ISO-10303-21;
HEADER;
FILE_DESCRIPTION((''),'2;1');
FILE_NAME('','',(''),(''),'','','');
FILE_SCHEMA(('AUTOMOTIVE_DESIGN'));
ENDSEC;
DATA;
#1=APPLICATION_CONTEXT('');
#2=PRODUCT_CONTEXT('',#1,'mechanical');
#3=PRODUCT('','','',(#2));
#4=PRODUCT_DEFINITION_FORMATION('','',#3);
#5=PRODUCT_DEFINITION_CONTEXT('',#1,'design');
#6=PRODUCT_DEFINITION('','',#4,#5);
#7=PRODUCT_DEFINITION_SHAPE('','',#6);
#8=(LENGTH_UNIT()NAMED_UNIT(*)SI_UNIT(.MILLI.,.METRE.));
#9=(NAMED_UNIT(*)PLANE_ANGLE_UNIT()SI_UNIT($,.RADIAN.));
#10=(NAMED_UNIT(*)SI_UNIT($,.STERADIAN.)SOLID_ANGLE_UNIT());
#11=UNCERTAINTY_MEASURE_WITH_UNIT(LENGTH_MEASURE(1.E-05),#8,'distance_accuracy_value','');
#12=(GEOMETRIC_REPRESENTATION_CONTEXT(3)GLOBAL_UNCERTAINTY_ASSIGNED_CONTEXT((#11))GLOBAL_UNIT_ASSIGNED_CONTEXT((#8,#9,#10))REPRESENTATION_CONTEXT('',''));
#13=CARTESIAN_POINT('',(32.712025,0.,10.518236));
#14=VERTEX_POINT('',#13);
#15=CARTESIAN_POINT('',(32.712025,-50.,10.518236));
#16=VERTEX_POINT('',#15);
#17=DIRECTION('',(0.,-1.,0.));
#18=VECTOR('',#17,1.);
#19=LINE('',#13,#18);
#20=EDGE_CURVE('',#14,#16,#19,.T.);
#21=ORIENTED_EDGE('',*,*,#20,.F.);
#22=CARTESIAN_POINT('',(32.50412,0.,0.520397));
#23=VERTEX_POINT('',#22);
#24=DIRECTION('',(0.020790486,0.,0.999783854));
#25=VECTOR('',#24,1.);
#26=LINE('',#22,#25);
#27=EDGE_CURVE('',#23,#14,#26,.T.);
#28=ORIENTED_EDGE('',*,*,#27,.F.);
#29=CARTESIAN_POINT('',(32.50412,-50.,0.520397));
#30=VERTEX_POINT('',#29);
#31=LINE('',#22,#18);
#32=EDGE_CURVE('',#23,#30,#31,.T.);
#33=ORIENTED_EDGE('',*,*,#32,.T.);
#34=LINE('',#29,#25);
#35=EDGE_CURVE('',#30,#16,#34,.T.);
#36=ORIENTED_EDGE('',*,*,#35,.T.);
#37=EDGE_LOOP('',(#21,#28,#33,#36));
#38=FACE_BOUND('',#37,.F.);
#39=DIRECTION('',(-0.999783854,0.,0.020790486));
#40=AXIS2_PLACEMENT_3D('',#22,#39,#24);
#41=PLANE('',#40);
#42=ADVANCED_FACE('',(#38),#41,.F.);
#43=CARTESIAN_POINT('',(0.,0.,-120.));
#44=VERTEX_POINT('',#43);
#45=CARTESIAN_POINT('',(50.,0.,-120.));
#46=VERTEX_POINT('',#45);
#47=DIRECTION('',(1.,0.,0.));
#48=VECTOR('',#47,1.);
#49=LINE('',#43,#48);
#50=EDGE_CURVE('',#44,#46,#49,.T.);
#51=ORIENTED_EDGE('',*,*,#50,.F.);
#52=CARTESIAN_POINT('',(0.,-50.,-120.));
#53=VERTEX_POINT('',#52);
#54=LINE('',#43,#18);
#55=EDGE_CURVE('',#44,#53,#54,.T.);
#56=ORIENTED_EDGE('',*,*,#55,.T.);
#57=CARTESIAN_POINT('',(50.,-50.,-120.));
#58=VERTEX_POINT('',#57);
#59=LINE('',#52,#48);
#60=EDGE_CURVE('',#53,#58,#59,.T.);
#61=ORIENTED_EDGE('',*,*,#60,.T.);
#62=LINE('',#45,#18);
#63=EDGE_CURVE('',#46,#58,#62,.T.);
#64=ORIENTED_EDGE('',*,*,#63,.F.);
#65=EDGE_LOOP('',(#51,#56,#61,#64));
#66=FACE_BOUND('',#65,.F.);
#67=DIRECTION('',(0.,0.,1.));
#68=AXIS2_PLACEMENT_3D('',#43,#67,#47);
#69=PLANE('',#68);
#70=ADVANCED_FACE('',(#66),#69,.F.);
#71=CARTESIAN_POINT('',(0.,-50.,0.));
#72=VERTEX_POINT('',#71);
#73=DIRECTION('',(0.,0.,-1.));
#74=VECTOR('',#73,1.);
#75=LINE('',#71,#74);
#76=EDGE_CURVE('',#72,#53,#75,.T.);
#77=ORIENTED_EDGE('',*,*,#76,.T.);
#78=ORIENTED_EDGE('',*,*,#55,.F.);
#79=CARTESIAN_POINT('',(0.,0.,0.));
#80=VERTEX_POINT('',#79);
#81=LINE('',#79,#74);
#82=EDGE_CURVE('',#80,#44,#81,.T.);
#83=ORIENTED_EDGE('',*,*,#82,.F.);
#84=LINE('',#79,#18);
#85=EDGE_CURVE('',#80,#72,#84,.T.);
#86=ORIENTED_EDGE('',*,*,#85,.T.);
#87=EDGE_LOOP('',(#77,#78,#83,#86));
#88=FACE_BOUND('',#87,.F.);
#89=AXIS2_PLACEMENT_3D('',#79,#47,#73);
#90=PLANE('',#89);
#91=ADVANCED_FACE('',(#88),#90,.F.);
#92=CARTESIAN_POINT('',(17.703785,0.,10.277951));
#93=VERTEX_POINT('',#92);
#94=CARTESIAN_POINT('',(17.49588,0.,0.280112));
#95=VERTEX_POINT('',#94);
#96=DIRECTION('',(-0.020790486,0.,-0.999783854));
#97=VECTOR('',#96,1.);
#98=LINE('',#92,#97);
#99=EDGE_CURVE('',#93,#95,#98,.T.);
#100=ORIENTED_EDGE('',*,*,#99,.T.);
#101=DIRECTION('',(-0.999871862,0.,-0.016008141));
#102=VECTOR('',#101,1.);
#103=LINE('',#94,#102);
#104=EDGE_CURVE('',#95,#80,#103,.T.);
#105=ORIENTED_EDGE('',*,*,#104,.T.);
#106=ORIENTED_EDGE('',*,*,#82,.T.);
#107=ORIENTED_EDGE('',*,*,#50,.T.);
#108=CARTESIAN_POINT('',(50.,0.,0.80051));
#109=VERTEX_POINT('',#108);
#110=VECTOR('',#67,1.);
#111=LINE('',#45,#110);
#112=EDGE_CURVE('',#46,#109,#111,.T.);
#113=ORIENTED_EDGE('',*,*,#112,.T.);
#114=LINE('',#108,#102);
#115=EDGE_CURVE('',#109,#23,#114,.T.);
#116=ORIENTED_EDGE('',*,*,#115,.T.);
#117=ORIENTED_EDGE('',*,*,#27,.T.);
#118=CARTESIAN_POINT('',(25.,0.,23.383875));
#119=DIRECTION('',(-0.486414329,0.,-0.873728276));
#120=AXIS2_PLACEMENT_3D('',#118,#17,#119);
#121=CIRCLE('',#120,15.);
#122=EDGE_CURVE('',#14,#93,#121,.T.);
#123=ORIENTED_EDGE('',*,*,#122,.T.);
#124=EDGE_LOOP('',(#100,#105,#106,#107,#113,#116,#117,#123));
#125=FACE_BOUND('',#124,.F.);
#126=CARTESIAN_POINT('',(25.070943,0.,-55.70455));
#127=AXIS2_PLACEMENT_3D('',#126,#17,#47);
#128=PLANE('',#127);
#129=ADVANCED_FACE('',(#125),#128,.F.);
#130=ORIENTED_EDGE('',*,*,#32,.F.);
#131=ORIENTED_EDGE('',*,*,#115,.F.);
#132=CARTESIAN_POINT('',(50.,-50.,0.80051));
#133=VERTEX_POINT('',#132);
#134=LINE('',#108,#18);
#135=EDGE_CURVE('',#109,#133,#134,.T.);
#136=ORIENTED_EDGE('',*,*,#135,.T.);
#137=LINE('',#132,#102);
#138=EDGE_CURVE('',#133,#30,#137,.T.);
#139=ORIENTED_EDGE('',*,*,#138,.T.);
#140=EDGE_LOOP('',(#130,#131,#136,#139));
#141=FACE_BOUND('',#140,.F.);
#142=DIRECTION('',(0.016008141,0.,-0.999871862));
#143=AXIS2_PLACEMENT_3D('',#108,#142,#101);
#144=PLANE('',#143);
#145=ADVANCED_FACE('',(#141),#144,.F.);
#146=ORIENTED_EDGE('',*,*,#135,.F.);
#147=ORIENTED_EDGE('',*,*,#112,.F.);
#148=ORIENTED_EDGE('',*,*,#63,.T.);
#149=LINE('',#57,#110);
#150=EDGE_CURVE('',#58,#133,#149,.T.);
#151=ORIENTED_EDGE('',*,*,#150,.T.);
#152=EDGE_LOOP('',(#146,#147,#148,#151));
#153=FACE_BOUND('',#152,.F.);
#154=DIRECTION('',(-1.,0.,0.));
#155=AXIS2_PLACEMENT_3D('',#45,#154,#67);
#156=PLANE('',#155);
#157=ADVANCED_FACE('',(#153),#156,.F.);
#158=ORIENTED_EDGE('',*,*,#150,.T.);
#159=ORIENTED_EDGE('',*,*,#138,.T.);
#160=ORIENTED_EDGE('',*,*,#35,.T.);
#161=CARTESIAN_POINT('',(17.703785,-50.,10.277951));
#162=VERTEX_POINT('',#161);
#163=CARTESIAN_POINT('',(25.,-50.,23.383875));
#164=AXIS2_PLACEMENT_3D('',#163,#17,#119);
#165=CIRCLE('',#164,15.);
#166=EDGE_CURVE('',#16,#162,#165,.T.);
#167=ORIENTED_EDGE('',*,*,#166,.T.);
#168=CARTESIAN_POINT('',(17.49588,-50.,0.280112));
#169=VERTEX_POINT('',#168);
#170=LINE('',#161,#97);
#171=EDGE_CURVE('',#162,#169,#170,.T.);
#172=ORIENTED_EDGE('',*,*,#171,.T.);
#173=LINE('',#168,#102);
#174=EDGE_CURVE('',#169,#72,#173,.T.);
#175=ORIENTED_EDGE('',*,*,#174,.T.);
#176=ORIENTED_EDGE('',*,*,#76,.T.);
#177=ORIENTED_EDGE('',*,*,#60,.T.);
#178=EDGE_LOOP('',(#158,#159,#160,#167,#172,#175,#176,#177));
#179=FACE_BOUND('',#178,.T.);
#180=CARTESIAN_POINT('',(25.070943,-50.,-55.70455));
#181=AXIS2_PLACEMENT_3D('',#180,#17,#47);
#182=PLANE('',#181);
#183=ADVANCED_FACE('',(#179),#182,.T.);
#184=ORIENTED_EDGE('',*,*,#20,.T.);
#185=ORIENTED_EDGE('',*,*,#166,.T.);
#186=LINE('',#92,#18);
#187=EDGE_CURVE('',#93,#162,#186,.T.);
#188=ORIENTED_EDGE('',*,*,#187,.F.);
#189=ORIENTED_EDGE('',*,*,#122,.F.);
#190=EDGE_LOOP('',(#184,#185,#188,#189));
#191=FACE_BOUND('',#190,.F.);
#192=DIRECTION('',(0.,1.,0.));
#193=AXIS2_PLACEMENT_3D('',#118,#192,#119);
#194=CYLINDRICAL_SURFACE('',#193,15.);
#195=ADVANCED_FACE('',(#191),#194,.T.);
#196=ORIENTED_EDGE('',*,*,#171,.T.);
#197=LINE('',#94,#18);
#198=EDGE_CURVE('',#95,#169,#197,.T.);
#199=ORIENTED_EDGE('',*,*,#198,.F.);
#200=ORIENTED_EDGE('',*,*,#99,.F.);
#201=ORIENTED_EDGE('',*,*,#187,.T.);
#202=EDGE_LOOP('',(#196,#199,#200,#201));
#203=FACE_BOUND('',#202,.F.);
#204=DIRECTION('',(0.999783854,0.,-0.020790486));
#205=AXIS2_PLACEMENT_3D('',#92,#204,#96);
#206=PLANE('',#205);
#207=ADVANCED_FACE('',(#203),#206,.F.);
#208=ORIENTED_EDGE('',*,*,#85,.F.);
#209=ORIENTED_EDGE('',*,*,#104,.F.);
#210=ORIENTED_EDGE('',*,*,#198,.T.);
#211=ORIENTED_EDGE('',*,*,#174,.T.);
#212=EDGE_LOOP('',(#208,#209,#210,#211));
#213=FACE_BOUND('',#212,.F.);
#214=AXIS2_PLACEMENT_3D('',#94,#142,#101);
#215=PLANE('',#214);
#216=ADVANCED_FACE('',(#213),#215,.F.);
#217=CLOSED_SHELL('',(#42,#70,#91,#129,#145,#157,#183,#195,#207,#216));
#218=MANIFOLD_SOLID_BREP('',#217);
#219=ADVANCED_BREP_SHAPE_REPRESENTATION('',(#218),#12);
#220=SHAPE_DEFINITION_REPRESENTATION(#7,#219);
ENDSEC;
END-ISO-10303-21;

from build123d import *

# Parameters (mm, degrees)
F1_DEPTH = 50


# Not quite as in the source:
# - a feature names something its author has since deleted; it is built from what else it names


with BuildPart() as f1:
    # F0 (on Front) → F1 (new body)
    with BuildSketch(Plane.XZ):
        with BuildLine():
            Line((0, 0), (0, -120))
            Line((0, -120), (50, -120))
            Line((50, -120), (50, 0.8005096136))
            Line((50, 0.8005096136), (32.5041198008, 0.5203972077))
            Line((32.5041198008, 0.5203972077), (32.7120246633, 10.5182357525))
            ThreePointArc((32.7120246633, 10.5182357525), (25.2401221113, 8.3857971686), (17.7037850617, 10.2779509508))
            Line((17.7037850617, 10.2779509508), (17.4958801992, 0.280112406))
            Line((17.4958801992, 0.280112406), (0, 0))
        make_face()
        with BuildLine():
            ThreePointArc((40, 23.3838750912), (17.3987903619, 36.3152946589), (17.7037850617, 10.2779509508))
            ThreePointArc((17.7037850617, 10.2779509508), (25.2401221113, 8.3857971686), (32.7120246633, 10.5182357525))
            ThreePointArc((32.7120246633, 10.5182357525), (38.0514437889, 15.9906474452), (40, 23.3838750912))
        make_face()
    extrude(amount=F1_DEPTH)


solid = f1.part
